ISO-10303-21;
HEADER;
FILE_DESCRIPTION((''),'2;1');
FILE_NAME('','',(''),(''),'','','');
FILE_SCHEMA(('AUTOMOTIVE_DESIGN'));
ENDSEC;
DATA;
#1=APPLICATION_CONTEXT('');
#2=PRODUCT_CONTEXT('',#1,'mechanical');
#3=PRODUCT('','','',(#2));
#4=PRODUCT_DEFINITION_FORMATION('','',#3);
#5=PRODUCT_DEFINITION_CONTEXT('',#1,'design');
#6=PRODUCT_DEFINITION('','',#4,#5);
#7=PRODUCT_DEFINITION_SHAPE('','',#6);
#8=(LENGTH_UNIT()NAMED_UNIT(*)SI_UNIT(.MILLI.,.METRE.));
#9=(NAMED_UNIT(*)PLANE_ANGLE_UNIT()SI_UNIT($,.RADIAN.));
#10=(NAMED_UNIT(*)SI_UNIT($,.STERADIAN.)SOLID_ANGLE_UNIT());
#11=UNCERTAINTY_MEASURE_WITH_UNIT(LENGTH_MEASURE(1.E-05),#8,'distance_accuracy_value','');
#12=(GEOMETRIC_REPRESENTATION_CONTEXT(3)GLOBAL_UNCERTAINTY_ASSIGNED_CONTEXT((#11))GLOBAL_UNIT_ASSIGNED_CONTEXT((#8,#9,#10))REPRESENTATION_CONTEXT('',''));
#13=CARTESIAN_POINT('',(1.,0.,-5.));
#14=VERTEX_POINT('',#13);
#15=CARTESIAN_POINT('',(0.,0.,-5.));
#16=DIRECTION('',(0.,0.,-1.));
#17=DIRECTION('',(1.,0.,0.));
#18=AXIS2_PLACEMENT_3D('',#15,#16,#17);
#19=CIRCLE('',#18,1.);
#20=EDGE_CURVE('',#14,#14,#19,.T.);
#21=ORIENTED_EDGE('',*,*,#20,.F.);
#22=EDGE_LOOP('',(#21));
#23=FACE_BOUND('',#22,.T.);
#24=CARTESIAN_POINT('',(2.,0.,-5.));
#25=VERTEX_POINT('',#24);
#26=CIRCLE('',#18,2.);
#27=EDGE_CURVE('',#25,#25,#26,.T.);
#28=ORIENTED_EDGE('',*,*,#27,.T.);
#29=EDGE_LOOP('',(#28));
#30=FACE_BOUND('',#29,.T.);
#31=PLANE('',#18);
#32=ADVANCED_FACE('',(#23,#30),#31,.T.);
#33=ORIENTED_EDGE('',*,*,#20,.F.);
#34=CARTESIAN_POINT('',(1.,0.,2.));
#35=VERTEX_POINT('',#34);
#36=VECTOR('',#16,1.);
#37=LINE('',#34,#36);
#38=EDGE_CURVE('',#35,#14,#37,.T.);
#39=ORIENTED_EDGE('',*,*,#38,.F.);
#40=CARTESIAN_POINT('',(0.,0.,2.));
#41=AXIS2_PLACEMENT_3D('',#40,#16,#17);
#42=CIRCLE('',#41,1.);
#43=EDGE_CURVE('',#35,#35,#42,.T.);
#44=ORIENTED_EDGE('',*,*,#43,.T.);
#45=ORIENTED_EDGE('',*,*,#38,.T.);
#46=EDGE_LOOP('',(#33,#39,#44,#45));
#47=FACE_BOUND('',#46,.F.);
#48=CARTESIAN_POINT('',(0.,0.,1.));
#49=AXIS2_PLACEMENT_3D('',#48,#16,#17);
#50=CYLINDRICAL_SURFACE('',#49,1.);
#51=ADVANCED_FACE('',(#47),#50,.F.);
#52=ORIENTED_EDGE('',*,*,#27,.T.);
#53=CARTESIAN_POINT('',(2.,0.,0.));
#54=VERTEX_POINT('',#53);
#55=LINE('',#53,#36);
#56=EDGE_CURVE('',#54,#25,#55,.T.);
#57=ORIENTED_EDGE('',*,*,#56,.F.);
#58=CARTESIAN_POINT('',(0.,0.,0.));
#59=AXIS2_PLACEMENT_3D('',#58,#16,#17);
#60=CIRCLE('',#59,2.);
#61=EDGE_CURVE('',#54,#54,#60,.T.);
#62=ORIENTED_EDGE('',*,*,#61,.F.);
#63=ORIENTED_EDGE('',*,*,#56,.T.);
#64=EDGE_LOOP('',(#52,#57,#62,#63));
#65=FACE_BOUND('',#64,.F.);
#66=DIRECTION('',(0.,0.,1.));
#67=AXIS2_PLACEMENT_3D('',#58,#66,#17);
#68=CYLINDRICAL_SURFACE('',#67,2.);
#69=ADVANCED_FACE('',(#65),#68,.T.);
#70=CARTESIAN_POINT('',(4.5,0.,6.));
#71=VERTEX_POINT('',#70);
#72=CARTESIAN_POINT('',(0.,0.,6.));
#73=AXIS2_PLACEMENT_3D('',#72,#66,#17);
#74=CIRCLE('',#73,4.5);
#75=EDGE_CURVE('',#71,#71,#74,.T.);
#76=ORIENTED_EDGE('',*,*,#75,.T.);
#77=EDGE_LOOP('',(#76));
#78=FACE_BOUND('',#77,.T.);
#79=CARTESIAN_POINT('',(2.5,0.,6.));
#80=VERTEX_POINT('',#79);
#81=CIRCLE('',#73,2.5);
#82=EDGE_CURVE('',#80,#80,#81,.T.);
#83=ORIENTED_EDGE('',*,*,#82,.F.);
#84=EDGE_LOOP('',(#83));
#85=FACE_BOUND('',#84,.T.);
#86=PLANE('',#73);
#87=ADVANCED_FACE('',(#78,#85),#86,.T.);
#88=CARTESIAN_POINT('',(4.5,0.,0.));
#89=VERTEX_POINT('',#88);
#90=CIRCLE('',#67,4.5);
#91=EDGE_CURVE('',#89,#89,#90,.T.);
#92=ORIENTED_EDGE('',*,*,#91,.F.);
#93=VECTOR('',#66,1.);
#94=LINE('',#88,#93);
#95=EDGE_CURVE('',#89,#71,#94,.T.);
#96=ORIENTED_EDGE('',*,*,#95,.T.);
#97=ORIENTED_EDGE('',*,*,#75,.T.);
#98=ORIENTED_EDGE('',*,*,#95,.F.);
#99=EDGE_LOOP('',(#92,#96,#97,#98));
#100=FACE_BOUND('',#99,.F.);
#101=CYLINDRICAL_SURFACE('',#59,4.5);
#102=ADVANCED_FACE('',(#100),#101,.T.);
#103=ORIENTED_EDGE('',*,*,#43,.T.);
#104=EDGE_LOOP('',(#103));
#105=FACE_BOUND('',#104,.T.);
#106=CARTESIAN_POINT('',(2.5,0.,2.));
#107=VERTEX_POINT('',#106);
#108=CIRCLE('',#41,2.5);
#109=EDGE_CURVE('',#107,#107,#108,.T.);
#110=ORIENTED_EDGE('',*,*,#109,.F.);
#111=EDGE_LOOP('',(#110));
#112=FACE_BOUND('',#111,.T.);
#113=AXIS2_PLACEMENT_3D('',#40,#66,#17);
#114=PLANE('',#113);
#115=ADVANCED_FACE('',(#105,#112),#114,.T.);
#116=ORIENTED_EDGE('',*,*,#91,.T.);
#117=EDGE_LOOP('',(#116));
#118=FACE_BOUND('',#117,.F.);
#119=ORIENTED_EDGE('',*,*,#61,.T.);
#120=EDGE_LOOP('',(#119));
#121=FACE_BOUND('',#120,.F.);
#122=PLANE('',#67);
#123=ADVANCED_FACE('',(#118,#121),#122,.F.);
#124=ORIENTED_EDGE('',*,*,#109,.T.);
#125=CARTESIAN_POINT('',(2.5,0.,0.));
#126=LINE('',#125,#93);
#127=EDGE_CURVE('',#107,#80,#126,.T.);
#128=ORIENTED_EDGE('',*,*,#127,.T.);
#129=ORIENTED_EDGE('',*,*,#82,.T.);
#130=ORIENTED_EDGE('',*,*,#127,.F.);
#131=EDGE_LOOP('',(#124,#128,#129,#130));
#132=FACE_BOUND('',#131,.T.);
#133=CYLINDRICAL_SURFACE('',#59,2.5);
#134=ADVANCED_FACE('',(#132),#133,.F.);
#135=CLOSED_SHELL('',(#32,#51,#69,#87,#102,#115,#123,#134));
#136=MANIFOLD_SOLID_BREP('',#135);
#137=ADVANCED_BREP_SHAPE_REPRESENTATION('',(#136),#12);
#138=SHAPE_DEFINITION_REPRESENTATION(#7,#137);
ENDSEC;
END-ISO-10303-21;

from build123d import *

# Parameters (mm, degrees)
F0_R     = 4.5
F1_DEPTH = 6
F2_T     = -2
F3_R     = 2
F4_DEPTH = 5
F5_T     = 1
F6_R     = 1
F7_DEPTH = 12.5


# Not quite as in the source:
# - a shell that OpenCascade refuses in one call is made with other operations: the cavity is built on its own and cut out


with BuildPart() as f1:
    # F0 (on Top) → F1 (new body)
    with BuildSketch(Plane.XY):
        Circle(F0_R)
    extrude(amount=F1_DEPTH)

    # F2
    f2_openings = [f1.faces().sort_by_distance(p)[0] for p in [
        (0, 0, 6),
    ]]
    offset(amount=F2_T, openings=f2_openings)

    # F3 (on face) → F4 (join)
    with BuildSketch(Plane(origin=(0, 0, 0), x_dir=(1, 0, 0), z_dir=(0, 0, -1))):
        Circle(F3_R)
    extrude(amount=F4_DEPTH)

    # F5: shell of thickness 1, made by hand


with BuildPart() as f5_core1:
    # F5_t2: copy of F1
    add(f1.part)

    # the walls: a layer under each face that stays
    f5_faces = [f5_core1.faces().sort_by_distance(p)[0] for p in [
        (-4.5, 0, 3),
        (-3, -3, 0),
        (-3, -3, 6),
        (-2, 0, -2.5),
        (-2.5, 0, 4),
        (0, 0, 2),
    ]]
    thicken(f5_faces, amount=-F5_T, mode=Mode.SUBTRACT)

    # F5_s3 → F5_t4 (revolve, cut)
    with BuildSketch(Plane.XZ):
        Polygon((2.01, -0.01), (2, 1), (1, 1), (1, 0), align=None)
    revolve(axis=Axis((0, 0, 0), (0, 0, -1)), mode=Mode.SUBTRACT)

    # F5_s5 → F5_t6 (revolve, cut)
    with BuildSketch(Plane.XZ):
        Polygon((2.49, 2.01), (3.5, 2), (3.5, 1), (2.5, 1), align=None)
    revolve(axis=Axis((0, 0, 2), (0, 0, -1)), mode=Mode.SUBTRACT)


with BuildPart() as f1_1:
    add(f1.part)

    # what is left inside the walls is the cavity
    f5_cavity = [f5_core1.part.solids().sort_by_distance(p)[0] for p in [
        (-0.99, 0, -1),
    ]]
    add(f5_cavity, mode=Mode.SUBTRACT)

    # F6 (on face) → F7 (cut, symmetric)
    with BuildSketch(Plane(origin=(0, 0, 0), x_dir=(1, 0, 0), z_dir=(0, 0, -1))):
        Circle(F6_R)
    extrude(amount=F7_DEPTH, both=True, mode=Mode.SUBTRACT)


solid = f1_1.part
